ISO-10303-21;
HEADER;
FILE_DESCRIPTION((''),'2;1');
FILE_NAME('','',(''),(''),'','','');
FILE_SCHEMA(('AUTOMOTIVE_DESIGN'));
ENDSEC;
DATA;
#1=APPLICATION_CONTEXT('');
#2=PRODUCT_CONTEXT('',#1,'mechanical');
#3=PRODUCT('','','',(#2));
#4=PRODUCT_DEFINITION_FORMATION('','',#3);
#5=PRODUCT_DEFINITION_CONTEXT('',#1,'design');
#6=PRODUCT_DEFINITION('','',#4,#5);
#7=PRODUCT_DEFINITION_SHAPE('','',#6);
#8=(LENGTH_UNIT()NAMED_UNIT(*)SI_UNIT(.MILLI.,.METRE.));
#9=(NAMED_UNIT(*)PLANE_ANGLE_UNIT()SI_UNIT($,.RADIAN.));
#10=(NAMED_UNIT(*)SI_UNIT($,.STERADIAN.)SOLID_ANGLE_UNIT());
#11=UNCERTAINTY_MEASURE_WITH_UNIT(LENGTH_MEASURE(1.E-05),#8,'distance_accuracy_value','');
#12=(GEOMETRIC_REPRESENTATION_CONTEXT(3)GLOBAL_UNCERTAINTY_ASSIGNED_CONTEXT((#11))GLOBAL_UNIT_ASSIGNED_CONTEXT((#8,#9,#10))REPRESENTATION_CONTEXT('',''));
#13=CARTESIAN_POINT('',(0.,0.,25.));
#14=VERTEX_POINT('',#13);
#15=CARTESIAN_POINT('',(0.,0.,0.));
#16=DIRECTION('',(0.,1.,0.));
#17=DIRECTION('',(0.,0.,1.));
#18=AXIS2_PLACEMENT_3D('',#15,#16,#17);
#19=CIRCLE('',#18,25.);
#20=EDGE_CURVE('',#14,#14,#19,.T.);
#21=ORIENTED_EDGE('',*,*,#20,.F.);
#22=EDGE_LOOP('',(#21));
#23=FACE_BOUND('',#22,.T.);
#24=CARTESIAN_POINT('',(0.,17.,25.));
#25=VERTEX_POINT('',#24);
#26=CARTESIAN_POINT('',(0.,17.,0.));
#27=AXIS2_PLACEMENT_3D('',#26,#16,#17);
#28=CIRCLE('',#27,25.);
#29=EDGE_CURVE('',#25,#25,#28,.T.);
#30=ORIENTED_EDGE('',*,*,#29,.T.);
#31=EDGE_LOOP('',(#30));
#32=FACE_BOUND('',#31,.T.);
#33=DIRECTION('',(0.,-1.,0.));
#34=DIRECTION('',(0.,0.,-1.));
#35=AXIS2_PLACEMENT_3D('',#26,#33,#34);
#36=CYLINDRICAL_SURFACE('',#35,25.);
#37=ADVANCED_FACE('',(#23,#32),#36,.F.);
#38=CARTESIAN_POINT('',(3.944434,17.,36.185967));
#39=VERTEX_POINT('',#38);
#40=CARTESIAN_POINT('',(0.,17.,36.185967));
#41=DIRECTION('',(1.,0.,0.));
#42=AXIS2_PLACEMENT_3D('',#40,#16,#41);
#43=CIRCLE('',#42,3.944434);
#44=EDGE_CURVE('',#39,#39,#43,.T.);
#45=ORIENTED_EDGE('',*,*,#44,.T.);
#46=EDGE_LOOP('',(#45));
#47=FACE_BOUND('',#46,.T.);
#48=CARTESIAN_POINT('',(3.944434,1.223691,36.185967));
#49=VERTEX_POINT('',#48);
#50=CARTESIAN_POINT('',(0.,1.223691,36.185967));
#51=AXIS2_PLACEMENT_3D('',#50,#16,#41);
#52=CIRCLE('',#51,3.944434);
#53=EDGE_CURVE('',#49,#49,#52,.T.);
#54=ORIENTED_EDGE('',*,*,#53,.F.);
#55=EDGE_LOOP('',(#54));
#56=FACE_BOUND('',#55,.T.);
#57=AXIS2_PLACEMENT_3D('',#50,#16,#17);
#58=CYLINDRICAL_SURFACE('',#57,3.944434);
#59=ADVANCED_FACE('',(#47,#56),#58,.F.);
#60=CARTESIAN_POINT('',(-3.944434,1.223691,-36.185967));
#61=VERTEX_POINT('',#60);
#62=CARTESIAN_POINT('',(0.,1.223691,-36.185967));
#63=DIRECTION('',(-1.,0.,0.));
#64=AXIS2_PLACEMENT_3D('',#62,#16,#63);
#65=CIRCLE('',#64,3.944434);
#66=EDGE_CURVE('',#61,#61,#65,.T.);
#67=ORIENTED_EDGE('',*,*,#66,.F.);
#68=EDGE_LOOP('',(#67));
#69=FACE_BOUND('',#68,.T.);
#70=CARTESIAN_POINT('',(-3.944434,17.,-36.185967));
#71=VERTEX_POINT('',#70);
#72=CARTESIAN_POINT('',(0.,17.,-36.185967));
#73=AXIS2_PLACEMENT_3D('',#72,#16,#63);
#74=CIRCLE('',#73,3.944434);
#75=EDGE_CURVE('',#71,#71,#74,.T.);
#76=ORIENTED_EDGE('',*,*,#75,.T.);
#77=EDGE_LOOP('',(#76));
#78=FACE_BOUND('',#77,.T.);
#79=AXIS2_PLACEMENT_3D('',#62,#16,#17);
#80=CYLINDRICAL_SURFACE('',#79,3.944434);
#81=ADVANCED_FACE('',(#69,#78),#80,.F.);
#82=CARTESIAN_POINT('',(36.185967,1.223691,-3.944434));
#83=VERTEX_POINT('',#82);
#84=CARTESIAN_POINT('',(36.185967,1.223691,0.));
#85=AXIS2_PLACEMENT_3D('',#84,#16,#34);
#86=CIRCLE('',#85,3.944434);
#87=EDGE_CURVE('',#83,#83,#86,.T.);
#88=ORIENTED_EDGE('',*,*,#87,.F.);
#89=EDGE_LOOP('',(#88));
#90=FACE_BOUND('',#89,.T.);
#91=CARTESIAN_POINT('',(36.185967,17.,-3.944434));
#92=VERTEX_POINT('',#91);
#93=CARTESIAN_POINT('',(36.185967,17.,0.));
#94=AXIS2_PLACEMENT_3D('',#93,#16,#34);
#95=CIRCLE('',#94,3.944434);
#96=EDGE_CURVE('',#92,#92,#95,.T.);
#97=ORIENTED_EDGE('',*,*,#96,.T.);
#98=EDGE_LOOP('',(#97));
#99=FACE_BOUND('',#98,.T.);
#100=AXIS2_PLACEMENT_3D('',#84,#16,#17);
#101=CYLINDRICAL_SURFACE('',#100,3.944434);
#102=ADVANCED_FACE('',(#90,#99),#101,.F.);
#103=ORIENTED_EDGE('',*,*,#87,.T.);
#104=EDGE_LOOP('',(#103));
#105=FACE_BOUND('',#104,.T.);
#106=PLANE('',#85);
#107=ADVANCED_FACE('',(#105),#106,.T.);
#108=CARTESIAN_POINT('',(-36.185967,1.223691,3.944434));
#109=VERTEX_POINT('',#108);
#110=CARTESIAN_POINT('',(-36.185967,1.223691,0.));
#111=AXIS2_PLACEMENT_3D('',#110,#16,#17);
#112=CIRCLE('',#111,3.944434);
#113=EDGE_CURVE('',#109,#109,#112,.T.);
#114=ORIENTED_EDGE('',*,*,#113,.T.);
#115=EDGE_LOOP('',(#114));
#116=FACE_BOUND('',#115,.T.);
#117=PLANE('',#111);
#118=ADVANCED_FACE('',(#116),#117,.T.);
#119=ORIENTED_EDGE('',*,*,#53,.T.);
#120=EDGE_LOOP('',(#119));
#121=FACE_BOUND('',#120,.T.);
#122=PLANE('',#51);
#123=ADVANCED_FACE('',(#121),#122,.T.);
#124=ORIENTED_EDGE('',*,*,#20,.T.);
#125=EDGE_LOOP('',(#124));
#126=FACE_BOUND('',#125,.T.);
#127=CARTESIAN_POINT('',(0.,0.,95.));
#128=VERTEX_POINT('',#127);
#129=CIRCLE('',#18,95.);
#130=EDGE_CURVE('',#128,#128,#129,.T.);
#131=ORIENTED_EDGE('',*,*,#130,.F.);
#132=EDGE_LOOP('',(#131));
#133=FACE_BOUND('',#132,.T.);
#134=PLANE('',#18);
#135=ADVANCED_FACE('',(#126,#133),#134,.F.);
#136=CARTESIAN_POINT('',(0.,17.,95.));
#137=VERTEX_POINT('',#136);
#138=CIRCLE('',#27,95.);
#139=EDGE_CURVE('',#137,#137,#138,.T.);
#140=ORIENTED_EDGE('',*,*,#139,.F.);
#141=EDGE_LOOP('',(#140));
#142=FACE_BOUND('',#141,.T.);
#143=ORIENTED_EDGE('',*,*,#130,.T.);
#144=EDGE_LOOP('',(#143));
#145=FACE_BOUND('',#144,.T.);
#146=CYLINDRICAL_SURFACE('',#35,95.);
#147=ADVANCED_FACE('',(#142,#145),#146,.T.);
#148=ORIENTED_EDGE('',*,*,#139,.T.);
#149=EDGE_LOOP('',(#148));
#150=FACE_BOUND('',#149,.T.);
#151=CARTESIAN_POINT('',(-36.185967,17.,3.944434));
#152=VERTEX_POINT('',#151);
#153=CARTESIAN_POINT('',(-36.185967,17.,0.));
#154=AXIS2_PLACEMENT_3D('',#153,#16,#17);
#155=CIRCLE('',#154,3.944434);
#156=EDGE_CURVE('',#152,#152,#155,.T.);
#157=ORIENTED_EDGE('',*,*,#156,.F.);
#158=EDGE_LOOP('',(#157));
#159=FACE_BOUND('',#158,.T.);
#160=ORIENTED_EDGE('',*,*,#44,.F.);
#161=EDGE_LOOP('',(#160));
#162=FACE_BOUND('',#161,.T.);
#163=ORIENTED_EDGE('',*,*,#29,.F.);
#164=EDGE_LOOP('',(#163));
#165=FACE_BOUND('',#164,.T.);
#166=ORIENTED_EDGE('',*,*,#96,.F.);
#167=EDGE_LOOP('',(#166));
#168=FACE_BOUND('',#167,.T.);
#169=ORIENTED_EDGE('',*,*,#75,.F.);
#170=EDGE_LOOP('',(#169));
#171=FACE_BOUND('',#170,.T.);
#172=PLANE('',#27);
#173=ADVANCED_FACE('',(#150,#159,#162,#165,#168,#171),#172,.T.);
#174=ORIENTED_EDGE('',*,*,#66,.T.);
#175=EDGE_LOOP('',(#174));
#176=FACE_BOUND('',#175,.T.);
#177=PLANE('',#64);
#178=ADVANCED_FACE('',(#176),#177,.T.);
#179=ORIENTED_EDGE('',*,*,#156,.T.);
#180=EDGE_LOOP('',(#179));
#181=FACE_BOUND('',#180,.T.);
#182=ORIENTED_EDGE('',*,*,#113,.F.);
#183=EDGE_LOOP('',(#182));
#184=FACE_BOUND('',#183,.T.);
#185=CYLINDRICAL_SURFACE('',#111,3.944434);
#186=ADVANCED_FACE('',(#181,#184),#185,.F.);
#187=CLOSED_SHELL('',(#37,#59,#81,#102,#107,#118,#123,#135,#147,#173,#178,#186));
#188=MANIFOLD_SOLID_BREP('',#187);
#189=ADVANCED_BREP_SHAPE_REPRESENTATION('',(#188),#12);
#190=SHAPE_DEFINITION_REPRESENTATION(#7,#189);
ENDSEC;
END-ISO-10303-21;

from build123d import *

# Parameters (mm, degrees)
SKETCH1_R           = 95
BOSS_EXTRUDE1_DEPTH = 17
SKETCH2_R           = 25
CUT_EXTRUDE1_DEPTH  = 136.421564014
SKETCH3_R           = 3.944434484
CUT_EXTRUDE2_DEPTH  = 15.776308666
CIRPATTERN1_COUNT   = 4


with BuildPart() as part:
    # Sketch1 → Boss-Extrude1 (new body)
    with BuildSketch(Plane(origin=(0, 0, 0), x_dir=(1, 0, 0), z_dir=(0, 1, 0))):
        Circle(SKETCH1_R)
    extrude(amount=BOSS_EXTRUDE1_DEPTH)

    # Sketch2 → Cut-Extrude1 (cut, through all)
    with BuildSketch(Plane(origin=(0, 0, 0), x_dir=(1, 0, 0), z_dir=(0, 1, 0))):
        Circle(SKETCH2_R)
    extrude(amount=CUT_EXTRUDE1_DEPTH, mode=Mode.SUBTRACT)

    # Sketch3 → Cut-Extrude2 (cut)
    with BuildSketch(Plane(origin=(0, 17, 0), x_dir=(1, 0, 0), z_dir=(0, 1, 0))):
        with Locations((-36.185966833, 0)):
            Circle(SKETCH3_R)
    cut_extrude2 = extrude(amount=-CUT_EXTRUDE2_DEPTH, mode=Mode.SUBTRACT)

    # CirPattern1: Cut-Extrude2 ×4 about axis
    cirpattern1_axis = Axis((0, 0, 0), (0, 1, 0))
    for i in range(1, CIRPATTERN1_COUNT):
        add(cut_extrude2.rotate(cirpattern1_axis, i * 360 / CIRPATTERN1_COUNT), mode=Mode.SUBTRACT)


solid = part.part
